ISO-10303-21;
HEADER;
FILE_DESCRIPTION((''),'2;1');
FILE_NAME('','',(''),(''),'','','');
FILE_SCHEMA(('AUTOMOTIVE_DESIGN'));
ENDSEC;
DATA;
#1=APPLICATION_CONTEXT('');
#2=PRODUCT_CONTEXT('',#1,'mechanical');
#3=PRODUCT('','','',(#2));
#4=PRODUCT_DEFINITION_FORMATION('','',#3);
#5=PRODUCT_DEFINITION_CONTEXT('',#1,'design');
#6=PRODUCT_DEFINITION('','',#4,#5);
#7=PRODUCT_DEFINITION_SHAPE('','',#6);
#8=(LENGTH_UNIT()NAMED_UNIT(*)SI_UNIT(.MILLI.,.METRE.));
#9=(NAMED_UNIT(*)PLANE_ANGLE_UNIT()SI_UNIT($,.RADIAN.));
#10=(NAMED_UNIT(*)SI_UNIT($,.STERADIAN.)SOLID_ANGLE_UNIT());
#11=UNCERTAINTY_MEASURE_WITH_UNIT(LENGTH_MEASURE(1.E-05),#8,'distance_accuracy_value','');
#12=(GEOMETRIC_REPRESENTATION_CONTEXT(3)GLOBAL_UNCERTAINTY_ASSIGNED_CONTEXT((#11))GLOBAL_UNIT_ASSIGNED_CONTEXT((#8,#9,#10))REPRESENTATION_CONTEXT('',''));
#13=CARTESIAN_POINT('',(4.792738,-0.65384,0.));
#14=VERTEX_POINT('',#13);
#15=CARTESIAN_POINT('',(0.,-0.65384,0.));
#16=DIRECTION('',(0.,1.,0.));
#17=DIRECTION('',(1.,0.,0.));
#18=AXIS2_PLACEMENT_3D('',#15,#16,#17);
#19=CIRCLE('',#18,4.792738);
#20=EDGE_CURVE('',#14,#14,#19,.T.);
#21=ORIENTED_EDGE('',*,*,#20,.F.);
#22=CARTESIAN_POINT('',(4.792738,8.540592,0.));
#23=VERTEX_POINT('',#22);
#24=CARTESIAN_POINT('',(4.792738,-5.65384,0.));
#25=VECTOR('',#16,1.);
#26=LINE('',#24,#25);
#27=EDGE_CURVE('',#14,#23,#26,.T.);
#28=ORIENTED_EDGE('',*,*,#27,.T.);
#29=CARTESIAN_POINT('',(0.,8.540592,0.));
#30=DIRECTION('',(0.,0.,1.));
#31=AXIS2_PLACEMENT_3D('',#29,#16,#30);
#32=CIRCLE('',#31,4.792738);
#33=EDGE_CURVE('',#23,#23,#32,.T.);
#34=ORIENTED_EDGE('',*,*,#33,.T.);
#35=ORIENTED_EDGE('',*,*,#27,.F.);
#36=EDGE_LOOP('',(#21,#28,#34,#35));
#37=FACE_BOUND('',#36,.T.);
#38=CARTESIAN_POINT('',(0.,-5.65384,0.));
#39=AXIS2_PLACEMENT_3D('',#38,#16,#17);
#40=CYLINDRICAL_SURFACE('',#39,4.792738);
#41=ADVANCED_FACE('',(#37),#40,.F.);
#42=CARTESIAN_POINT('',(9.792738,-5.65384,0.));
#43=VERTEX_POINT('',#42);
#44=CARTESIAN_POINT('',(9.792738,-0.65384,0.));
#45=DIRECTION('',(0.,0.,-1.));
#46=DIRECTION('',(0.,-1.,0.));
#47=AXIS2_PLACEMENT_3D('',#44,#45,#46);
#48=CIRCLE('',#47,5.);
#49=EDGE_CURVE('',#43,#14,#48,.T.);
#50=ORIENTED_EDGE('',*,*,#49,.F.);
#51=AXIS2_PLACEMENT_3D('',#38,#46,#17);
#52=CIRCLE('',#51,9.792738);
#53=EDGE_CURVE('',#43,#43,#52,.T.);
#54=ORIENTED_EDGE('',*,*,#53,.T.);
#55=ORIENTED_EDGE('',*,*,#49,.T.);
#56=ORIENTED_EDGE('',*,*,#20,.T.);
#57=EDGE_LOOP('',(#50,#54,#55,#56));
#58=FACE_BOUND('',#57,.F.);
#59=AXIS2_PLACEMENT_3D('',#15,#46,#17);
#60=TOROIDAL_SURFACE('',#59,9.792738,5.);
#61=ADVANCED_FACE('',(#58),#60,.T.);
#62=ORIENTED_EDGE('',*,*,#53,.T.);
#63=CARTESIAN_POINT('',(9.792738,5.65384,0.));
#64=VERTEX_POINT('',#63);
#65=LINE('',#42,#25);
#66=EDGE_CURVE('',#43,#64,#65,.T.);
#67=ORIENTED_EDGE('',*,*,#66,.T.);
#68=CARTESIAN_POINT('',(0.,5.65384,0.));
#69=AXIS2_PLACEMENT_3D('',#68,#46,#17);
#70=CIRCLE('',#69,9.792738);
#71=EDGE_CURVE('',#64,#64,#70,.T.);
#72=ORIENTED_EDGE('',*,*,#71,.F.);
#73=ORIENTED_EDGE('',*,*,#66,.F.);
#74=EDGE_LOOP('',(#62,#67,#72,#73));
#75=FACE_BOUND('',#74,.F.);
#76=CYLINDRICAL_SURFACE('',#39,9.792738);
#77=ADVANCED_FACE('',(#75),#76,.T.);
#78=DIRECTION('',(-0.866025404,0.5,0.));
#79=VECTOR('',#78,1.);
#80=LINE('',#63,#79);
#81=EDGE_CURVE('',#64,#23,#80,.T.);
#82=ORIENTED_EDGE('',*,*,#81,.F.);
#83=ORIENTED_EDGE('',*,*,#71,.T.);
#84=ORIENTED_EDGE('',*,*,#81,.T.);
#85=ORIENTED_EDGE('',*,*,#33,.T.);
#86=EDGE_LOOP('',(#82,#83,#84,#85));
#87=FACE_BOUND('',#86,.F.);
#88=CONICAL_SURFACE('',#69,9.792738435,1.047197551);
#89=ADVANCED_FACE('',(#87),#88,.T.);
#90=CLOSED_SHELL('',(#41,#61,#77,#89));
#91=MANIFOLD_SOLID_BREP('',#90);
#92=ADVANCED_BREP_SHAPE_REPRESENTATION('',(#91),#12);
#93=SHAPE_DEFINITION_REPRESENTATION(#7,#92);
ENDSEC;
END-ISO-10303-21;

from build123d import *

# Parameters (mm, degrees)
F2_T = -5


# Not quite as in the source:
# - a fillet or chamfer that OpenCascade refuses, or shapes differently, is made with other operations: its cross-section is extruded or revolved along the edge and cut away or added


with BuildPart() as f1:
    # F0 (on Top) → F1 (revolve)
    with BuildSketch(Plane.XY):
        Polygon((0, 11.3076803427), (0, -11.3076803427), (9.7927384347, -5.6538401714), (9.7927384347, 5.6538401714), align=None)
    revolve(axis=Axis((0, 0, 0), (0, -1, 0)))

    # F2
    f2_openings = [f1.faces().sort_by_distance(p)[0] for p in [
        (-4.896369, -8.48076, 0),
        (-4.896369, 8.48076, 0),
    ]]
    offset(amount=F2_T, openings=f2_openings)

    # F3: fillet of radius 5 on 1 edges, made by hand

    # F3_s1 → F3_t2 (revolve, cut)
    with BuildSketch(Plane.XY):
        with BuildLine():
            ThreePointArc((9.7927384347, -5.6538401714), (6.2572045287, -4.1893740773), (4.7927384347, -0.6538401714))
            Line((4.7927384347, -0.6538401714), (4.6927384347, -0.6538401714))
            Line((4.6927384347, -0.6538401714), (4.6927384347, -8.5405915173))
            Line((4.6927384347, -8.5405915173), (4.8427384347, -8.6271940577))
            ThreePointArc((4.8427384347, -8.6271940577), (7.3427384347, -7.1838183847), (9.7927384347, -5.7538401714))
            Line((9.7927384347, -5.7538401714), (9.7927384347, -5.6538401714))
        make_face()
    revolve(axis=Axis((0, -8.5405915173, 0), (0, 1, 0)), mode=Mode.SUBTRACT)


solid = f1.part
